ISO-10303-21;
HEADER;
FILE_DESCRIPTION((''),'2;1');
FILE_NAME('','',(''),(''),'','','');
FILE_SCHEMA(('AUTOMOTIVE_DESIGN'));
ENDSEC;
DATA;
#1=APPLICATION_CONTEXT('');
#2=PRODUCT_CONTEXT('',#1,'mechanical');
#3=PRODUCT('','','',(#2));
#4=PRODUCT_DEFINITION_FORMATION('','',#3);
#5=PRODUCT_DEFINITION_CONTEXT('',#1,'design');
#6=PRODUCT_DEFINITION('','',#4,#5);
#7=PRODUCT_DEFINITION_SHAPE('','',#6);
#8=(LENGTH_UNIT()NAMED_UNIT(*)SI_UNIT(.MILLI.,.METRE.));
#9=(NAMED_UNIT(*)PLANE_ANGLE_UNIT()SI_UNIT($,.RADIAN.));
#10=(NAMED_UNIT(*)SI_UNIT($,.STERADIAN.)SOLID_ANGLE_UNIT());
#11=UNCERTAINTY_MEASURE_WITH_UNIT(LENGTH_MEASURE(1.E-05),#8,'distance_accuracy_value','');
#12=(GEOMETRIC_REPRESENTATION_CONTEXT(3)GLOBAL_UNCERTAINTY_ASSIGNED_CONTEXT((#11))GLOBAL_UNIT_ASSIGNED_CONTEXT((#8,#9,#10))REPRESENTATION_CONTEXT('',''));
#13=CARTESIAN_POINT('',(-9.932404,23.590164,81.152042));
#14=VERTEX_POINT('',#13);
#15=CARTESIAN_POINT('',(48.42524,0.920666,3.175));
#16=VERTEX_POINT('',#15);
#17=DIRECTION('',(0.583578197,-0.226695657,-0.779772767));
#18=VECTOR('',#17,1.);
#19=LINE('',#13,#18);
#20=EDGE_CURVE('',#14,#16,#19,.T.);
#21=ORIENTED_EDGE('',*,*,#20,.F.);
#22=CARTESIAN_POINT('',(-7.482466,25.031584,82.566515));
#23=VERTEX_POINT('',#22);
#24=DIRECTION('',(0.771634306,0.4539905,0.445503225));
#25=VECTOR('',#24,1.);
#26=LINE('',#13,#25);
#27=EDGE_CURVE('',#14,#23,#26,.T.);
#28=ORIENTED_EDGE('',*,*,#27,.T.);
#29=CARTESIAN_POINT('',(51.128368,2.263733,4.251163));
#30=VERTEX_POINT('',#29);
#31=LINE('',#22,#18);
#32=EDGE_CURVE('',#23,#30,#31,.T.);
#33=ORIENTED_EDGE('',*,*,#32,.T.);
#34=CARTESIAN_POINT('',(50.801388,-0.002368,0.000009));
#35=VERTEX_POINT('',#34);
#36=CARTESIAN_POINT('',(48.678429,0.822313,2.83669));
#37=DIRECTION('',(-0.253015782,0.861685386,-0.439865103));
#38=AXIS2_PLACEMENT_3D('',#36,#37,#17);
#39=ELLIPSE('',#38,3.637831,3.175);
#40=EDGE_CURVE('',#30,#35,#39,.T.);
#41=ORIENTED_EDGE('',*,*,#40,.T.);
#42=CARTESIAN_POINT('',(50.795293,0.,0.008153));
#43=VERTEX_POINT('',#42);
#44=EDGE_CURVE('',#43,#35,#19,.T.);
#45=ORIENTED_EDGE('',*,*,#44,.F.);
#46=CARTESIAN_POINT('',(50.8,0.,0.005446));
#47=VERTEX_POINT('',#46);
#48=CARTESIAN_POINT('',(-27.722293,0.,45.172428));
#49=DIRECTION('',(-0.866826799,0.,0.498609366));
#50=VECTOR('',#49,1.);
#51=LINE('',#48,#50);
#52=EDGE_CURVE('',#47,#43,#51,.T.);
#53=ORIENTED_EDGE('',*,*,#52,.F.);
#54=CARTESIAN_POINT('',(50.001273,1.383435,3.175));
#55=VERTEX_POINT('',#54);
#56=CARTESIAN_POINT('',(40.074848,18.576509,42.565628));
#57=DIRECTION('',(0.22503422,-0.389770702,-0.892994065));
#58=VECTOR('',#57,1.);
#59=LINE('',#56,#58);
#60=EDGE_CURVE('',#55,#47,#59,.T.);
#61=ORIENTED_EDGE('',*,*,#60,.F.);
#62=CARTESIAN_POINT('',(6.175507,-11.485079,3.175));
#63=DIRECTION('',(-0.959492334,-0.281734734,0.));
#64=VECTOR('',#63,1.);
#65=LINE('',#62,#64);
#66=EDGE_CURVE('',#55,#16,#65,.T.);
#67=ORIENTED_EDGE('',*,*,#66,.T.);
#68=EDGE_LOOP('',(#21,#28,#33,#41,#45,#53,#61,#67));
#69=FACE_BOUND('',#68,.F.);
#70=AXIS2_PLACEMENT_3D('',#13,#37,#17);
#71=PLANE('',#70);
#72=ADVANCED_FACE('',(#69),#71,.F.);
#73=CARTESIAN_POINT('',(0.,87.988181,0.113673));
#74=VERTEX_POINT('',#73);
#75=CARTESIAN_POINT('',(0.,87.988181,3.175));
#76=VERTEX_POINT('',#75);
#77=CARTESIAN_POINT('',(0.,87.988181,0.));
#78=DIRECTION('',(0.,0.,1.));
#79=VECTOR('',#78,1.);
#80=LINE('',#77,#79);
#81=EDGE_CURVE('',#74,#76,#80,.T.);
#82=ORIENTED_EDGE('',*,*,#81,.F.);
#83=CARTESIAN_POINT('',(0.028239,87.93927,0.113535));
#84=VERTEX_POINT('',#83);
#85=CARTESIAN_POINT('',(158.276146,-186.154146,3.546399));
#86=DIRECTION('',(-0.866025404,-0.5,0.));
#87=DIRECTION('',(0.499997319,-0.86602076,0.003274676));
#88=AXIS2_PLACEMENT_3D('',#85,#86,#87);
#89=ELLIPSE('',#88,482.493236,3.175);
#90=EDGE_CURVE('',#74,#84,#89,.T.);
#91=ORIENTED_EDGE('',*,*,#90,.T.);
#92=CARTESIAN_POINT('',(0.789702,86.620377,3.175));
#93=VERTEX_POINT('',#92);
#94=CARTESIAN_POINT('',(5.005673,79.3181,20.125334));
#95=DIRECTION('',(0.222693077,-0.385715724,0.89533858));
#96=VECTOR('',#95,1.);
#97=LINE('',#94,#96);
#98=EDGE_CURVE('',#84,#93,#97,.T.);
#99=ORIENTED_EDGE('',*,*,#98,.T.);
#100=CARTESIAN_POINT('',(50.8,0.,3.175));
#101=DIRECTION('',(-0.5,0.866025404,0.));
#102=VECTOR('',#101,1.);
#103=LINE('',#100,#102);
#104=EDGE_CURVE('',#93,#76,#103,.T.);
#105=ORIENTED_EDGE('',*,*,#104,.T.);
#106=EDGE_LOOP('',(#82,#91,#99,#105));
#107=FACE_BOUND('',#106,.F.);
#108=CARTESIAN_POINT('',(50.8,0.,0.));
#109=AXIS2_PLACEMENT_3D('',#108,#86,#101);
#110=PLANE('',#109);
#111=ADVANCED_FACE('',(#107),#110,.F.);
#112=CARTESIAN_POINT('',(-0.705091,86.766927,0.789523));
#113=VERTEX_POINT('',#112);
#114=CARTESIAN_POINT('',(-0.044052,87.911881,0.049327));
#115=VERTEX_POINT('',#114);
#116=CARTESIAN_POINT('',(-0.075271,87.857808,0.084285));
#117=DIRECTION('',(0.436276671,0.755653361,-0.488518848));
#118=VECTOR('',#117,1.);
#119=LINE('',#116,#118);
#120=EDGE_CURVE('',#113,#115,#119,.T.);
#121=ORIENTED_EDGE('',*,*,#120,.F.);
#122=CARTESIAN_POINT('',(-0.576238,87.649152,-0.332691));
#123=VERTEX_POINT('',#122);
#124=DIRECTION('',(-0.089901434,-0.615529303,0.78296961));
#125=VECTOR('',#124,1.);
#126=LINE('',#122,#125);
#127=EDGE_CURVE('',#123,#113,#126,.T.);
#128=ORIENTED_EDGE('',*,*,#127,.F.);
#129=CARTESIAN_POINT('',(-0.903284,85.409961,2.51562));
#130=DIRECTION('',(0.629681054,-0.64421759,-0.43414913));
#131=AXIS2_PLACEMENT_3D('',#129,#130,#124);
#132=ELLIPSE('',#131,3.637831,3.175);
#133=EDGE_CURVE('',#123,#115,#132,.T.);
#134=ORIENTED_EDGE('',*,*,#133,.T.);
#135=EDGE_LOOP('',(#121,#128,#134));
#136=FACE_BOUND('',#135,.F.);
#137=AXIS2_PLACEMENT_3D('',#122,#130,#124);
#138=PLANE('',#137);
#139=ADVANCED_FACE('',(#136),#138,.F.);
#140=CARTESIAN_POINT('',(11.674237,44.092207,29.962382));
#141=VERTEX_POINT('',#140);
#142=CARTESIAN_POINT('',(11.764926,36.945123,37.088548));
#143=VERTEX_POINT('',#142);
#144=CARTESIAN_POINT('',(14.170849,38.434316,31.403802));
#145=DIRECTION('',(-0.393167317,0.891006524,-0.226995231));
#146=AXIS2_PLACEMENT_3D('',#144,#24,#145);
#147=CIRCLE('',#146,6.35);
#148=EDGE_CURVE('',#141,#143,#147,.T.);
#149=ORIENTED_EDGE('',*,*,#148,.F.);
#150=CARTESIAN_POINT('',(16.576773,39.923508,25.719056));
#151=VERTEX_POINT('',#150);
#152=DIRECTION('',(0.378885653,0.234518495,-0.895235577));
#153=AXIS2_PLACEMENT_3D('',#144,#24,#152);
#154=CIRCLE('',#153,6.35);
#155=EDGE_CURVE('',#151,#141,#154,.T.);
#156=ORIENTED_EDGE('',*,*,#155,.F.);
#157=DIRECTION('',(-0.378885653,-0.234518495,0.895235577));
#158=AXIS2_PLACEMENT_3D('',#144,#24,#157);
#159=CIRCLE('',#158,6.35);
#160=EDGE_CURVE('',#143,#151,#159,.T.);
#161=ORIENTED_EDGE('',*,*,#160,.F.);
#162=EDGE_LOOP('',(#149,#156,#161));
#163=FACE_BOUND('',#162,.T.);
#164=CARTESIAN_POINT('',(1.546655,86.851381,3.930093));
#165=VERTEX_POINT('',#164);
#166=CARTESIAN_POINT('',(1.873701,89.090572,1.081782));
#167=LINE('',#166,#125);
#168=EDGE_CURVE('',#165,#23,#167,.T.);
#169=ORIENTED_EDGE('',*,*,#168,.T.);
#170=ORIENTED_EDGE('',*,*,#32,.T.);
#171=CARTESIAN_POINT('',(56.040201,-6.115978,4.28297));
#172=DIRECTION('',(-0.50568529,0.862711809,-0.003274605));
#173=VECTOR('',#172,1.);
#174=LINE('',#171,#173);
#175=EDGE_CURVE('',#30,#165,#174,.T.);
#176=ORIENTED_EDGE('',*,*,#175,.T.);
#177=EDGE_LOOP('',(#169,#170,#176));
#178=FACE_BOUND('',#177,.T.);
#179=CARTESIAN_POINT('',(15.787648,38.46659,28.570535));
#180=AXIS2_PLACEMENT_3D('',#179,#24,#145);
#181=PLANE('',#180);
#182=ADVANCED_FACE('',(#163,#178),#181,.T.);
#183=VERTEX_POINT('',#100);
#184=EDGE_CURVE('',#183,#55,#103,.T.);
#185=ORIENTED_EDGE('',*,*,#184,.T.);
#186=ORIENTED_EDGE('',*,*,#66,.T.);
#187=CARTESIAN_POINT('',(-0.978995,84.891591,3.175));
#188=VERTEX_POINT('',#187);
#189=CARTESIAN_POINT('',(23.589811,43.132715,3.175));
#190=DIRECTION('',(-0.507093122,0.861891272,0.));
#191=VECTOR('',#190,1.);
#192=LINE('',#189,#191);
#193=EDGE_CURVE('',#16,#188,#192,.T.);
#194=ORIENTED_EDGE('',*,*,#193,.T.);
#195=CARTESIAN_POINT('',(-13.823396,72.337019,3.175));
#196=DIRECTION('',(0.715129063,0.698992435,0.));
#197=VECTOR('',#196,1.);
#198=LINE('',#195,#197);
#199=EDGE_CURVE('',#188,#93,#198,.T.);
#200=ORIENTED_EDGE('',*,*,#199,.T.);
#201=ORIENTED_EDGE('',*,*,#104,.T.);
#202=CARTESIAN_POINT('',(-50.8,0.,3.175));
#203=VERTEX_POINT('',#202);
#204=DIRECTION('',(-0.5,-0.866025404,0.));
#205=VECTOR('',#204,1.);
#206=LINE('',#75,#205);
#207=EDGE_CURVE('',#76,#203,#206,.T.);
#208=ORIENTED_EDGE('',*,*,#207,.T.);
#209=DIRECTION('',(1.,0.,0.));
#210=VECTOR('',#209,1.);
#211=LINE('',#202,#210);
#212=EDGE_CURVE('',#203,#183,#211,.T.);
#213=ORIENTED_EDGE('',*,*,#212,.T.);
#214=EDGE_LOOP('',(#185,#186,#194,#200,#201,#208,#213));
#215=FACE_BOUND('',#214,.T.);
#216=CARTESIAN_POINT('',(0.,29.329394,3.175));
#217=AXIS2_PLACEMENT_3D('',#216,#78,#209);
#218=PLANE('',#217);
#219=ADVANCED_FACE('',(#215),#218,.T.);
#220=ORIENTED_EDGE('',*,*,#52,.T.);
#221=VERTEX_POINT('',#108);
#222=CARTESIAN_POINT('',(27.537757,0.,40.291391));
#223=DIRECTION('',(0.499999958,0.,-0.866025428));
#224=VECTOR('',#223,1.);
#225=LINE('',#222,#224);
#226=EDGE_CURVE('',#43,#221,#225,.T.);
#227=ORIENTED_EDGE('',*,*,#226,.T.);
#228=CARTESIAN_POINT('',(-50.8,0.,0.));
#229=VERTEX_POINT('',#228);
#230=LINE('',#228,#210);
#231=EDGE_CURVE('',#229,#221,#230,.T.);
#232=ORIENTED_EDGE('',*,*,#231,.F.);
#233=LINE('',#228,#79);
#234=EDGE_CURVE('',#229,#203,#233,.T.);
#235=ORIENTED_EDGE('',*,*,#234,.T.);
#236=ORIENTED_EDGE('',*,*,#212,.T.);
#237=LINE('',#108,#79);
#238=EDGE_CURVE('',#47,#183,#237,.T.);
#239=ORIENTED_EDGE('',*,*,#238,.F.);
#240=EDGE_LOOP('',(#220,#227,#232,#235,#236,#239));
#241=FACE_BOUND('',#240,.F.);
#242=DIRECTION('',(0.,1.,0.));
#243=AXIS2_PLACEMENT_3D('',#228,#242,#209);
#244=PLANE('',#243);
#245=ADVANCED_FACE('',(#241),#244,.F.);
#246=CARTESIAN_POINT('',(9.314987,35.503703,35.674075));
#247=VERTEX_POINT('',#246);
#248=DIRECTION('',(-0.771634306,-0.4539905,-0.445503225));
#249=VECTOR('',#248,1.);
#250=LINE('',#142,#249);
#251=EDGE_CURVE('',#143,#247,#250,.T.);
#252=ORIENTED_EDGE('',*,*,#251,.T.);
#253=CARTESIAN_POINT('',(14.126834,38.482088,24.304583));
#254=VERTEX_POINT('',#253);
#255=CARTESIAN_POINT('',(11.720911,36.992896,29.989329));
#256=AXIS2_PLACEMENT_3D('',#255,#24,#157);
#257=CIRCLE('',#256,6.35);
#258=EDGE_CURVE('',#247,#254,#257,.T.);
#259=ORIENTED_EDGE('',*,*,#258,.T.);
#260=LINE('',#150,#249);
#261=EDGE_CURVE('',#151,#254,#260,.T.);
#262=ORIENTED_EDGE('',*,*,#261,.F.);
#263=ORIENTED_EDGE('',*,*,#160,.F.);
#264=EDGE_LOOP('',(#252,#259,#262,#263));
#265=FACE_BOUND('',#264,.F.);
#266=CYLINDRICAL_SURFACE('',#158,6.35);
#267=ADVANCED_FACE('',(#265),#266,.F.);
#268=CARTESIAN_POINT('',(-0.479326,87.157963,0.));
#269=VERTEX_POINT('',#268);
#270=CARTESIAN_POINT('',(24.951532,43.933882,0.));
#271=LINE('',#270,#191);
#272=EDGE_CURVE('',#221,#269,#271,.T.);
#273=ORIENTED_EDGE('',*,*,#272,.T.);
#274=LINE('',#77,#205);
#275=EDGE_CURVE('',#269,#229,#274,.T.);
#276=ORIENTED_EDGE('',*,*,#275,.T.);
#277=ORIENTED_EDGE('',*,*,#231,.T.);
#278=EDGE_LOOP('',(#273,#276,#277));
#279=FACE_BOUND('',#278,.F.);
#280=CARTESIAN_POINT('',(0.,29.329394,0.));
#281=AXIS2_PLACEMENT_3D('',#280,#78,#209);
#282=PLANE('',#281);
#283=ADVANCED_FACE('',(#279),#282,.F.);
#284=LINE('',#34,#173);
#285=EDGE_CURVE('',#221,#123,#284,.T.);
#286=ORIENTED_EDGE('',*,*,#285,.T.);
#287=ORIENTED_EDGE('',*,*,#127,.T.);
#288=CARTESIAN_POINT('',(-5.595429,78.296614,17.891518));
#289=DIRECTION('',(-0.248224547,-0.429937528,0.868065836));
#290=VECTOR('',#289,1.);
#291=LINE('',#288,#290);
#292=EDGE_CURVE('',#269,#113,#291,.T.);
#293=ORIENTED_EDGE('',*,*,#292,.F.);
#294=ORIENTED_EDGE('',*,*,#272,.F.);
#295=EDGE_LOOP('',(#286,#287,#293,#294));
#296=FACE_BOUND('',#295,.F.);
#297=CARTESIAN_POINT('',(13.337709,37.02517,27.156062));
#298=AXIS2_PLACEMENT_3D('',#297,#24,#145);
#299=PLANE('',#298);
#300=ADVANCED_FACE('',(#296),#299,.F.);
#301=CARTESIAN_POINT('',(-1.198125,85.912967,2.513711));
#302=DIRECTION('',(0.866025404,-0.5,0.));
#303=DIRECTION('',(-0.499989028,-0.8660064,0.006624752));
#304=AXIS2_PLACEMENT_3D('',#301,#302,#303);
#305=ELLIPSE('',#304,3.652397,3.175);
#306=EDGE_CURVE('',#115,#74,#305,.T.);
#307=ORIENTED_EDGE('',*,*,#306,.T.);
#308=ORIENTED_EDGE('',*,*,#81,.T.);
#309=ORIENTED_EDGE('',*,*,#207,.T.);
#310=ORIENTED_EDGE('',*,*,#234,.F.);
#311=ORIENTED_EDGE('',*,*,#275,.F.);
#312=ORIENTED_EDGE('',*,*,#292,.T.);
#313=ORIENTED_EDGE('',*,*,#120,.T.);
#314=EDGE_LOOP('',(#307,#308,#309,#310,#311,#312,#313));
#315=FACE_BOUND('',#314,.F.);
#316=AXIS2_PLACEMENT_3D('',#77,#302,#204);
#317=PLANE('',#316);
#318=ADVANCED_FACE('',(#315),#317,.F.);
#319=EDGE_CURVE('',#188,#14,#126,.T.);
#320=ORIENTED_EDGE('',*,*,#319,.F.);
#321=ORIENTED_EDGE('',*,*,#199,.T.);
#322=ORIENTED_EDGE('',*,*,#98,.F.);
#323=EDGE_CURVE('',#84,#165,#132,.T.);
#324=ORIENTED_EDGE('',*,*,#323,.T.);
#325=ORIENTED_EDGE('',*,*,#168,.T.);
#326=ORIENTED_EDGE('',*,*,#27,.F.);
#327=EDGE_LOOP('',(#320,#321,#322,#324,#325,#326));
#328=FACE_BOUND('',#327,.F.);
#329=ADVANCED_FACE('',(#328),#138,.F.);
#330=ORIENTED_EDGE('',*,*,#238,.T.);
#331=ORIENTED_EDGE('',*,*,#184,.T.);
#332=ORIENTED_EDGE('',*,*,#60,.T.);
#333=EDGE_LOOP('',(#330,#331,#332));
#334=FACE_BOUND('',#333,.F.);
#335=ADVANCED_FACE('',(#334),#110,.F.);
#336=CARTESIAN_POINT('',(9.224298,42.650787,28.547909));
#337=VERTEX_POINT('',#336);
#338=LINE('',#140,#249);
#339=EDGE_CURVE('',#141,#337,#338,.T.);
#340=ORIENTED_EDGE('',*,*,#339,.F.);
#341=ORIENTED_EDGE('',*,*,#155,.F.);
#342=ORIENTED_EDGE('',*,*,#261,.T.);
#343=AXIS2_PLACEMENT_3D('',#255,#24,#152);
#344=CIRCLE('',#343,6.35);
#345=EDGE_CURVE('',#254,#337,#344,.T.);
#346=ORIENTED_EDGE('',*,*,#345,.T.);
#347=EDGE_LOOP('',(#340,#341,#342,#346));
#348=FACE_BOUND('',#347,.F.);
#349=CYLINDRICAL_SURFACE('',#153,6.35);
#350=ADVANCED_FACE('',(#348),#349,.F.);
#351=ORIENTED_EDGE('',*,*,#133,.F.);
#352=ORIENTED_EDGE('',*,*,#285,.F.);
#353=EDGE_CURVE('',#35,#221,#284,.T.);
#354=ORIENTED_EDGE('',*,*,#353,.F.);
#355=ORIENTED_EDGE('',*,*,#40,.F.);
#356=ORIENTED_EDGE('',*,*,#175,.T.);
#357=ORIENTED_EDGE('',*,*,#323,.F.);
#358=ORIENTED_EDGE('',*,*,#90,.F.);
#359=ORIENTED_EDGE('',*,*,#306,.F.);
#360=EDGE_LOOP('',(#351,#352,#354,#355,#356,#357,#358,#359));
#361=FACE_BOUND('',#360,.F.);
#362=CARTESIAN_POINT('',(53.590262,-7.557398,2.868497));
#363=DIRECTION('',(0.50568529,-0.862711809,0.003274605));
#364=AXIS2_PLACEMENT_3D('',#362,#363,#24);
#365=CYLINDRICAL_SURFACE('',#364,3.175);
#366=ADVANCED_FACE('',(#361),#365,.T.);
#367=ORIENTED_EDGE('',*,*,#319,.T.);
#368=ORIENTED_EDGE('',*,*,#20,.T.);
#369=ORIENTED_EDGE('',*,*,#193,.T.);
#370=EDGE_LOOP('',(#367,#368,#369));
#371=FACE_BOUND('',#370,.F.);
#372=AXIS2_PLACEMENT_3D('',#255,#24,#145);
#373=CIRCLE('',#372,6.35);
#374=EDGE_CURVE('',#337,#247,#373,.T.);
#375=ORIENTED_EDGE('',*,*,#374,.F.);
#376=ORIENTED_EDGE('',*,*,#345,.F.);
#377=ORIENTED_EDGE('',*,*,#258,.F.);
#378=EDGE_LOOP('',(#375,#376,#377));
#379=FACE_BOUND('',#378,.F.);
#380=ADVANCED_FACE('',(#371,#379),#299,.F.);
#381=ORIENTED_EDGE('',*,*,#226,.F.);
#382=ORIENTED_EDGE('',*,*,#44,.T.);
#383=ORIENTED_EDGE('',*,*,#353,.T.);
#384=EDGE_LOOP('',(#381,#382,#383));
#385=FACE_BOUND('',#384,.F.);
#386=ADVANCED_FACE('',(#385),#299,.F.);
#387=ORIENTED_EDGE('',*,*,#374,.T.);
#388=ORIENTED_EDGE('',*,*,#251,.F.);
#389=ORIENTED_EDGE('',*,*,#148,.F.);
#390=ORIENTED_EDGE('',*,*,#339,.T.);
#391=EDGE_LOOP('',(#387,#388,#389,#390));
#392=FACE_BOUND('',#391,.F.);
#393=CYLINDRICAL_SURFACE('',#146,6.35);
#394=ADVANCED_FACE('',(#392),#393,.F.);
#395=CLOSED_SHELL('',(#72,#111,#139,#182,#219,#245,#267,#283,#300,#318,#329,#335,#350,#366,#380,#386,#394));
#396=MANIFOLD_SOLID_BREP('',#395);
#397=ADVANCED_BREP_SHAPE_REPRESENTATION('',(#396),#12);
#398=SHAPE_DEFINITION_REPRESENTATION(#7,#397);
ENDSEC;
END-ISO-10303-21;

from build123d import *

# Parameters (mm, degrees)
F1_DEPTH    = 3.175
F5_DEPTH    = 3.175
F6_T1_DEPTH = 117.475
F8_DEPTH    = 3.175


# Not quite as in the source:
# - a fillet or chamfer that OpenCascade refuses, or shapes differently, is made with other operations: its cross-section is extruded or revolved along the edge and cut away or added


with BuildPart() as f1:
    # F0 (on Top) → F1 (new body)
    with BuildSketch(Plane.XY):
        Polygon((50.8, 0), (0, 87.9881810245), (-50.8, 0), align=None)
    extrude(amount=F1_DEPTH)

    # F4 (on line) → F5 (join)
    with BuildSketch(Plane(origin=(30.2473107364, 17.7959839325, 17.4632910558), x_dir=(-0.3931673168, 0.8910065242, -0.226995231), z_dir=(0.7716343063, 0.4539904997, 0.445503225))):
        Polygon((6.5029600393, 75.2459340132), (-19.9755570322, -25.4006840255), (78.3980433443, 0), align=None)
    extrude(amount=F5_DEPTH)

    # F6: fillet of radius 3.175 on 1 edges, made by hand

    # F6_s2 → F6_t1 (cut)
    with BuildSketch(Plane(origin=(17.005719551, -29.012184774, 0.1101218851), x_dir=(-0.862716434, -0.5056880012, 0), z_dir=(-0.5056852899, 0.8627118085, -0.0032746052))):
        with BuildLine():
            ThreePointArc((-45.25402581, 4.1728704395), (-45.421662158, 1.7486197382), (-43.8259948462, -0.0841211704))
            Line((-43.8259948462, -0.0841211704), (-46.668506133, 1.3303591527))
            Line((-46.668506133, 1.3303591527), (-45.25402581, 4.1728704395))
        make_face()
    extrude(amount=F6_T1_DEPTH, mode=Mode.SUBTRACT)

    # F7 (on face) → F8 (cut, through all)
    with BuildSketch(Plane(origin=(32.697249659, 19.2374037692, 18.877763795), x_dir=(-0.3931673168, 0.8910065242, -0.226995231), z_dir=(0.7716343063, 0.4539904997, 0.445503225))):
        with BuildLine():
            ThreePointArc((23.2165575735, 13.9849704437), (26.5917627129, 16.2568894847), (27.8951978201, 20.1110668007))
            ThreePointArc((27.8951978201, 20.1110668007), (25.399375136, 25.1576316934), (19.8738380667, 26.2371631576))
            Line((19.8738380667, 26.2371631576), (23.2165575735, 13.9849704437))
        make_face()
        with BuildLine():
            Line((23.2165575735, 13.9849704437), (19.8738380667, 26.2371631576))
            ThreePointArc((19.8738380667, 26.2371631576), (15.4191014631, 18.4397070472), (23.2165575735, 13.9849704437))
        make_face()
    extrude(amount=-F8_DEPTH, mode=Mode.SUBTRACT)


solid = f1.part
